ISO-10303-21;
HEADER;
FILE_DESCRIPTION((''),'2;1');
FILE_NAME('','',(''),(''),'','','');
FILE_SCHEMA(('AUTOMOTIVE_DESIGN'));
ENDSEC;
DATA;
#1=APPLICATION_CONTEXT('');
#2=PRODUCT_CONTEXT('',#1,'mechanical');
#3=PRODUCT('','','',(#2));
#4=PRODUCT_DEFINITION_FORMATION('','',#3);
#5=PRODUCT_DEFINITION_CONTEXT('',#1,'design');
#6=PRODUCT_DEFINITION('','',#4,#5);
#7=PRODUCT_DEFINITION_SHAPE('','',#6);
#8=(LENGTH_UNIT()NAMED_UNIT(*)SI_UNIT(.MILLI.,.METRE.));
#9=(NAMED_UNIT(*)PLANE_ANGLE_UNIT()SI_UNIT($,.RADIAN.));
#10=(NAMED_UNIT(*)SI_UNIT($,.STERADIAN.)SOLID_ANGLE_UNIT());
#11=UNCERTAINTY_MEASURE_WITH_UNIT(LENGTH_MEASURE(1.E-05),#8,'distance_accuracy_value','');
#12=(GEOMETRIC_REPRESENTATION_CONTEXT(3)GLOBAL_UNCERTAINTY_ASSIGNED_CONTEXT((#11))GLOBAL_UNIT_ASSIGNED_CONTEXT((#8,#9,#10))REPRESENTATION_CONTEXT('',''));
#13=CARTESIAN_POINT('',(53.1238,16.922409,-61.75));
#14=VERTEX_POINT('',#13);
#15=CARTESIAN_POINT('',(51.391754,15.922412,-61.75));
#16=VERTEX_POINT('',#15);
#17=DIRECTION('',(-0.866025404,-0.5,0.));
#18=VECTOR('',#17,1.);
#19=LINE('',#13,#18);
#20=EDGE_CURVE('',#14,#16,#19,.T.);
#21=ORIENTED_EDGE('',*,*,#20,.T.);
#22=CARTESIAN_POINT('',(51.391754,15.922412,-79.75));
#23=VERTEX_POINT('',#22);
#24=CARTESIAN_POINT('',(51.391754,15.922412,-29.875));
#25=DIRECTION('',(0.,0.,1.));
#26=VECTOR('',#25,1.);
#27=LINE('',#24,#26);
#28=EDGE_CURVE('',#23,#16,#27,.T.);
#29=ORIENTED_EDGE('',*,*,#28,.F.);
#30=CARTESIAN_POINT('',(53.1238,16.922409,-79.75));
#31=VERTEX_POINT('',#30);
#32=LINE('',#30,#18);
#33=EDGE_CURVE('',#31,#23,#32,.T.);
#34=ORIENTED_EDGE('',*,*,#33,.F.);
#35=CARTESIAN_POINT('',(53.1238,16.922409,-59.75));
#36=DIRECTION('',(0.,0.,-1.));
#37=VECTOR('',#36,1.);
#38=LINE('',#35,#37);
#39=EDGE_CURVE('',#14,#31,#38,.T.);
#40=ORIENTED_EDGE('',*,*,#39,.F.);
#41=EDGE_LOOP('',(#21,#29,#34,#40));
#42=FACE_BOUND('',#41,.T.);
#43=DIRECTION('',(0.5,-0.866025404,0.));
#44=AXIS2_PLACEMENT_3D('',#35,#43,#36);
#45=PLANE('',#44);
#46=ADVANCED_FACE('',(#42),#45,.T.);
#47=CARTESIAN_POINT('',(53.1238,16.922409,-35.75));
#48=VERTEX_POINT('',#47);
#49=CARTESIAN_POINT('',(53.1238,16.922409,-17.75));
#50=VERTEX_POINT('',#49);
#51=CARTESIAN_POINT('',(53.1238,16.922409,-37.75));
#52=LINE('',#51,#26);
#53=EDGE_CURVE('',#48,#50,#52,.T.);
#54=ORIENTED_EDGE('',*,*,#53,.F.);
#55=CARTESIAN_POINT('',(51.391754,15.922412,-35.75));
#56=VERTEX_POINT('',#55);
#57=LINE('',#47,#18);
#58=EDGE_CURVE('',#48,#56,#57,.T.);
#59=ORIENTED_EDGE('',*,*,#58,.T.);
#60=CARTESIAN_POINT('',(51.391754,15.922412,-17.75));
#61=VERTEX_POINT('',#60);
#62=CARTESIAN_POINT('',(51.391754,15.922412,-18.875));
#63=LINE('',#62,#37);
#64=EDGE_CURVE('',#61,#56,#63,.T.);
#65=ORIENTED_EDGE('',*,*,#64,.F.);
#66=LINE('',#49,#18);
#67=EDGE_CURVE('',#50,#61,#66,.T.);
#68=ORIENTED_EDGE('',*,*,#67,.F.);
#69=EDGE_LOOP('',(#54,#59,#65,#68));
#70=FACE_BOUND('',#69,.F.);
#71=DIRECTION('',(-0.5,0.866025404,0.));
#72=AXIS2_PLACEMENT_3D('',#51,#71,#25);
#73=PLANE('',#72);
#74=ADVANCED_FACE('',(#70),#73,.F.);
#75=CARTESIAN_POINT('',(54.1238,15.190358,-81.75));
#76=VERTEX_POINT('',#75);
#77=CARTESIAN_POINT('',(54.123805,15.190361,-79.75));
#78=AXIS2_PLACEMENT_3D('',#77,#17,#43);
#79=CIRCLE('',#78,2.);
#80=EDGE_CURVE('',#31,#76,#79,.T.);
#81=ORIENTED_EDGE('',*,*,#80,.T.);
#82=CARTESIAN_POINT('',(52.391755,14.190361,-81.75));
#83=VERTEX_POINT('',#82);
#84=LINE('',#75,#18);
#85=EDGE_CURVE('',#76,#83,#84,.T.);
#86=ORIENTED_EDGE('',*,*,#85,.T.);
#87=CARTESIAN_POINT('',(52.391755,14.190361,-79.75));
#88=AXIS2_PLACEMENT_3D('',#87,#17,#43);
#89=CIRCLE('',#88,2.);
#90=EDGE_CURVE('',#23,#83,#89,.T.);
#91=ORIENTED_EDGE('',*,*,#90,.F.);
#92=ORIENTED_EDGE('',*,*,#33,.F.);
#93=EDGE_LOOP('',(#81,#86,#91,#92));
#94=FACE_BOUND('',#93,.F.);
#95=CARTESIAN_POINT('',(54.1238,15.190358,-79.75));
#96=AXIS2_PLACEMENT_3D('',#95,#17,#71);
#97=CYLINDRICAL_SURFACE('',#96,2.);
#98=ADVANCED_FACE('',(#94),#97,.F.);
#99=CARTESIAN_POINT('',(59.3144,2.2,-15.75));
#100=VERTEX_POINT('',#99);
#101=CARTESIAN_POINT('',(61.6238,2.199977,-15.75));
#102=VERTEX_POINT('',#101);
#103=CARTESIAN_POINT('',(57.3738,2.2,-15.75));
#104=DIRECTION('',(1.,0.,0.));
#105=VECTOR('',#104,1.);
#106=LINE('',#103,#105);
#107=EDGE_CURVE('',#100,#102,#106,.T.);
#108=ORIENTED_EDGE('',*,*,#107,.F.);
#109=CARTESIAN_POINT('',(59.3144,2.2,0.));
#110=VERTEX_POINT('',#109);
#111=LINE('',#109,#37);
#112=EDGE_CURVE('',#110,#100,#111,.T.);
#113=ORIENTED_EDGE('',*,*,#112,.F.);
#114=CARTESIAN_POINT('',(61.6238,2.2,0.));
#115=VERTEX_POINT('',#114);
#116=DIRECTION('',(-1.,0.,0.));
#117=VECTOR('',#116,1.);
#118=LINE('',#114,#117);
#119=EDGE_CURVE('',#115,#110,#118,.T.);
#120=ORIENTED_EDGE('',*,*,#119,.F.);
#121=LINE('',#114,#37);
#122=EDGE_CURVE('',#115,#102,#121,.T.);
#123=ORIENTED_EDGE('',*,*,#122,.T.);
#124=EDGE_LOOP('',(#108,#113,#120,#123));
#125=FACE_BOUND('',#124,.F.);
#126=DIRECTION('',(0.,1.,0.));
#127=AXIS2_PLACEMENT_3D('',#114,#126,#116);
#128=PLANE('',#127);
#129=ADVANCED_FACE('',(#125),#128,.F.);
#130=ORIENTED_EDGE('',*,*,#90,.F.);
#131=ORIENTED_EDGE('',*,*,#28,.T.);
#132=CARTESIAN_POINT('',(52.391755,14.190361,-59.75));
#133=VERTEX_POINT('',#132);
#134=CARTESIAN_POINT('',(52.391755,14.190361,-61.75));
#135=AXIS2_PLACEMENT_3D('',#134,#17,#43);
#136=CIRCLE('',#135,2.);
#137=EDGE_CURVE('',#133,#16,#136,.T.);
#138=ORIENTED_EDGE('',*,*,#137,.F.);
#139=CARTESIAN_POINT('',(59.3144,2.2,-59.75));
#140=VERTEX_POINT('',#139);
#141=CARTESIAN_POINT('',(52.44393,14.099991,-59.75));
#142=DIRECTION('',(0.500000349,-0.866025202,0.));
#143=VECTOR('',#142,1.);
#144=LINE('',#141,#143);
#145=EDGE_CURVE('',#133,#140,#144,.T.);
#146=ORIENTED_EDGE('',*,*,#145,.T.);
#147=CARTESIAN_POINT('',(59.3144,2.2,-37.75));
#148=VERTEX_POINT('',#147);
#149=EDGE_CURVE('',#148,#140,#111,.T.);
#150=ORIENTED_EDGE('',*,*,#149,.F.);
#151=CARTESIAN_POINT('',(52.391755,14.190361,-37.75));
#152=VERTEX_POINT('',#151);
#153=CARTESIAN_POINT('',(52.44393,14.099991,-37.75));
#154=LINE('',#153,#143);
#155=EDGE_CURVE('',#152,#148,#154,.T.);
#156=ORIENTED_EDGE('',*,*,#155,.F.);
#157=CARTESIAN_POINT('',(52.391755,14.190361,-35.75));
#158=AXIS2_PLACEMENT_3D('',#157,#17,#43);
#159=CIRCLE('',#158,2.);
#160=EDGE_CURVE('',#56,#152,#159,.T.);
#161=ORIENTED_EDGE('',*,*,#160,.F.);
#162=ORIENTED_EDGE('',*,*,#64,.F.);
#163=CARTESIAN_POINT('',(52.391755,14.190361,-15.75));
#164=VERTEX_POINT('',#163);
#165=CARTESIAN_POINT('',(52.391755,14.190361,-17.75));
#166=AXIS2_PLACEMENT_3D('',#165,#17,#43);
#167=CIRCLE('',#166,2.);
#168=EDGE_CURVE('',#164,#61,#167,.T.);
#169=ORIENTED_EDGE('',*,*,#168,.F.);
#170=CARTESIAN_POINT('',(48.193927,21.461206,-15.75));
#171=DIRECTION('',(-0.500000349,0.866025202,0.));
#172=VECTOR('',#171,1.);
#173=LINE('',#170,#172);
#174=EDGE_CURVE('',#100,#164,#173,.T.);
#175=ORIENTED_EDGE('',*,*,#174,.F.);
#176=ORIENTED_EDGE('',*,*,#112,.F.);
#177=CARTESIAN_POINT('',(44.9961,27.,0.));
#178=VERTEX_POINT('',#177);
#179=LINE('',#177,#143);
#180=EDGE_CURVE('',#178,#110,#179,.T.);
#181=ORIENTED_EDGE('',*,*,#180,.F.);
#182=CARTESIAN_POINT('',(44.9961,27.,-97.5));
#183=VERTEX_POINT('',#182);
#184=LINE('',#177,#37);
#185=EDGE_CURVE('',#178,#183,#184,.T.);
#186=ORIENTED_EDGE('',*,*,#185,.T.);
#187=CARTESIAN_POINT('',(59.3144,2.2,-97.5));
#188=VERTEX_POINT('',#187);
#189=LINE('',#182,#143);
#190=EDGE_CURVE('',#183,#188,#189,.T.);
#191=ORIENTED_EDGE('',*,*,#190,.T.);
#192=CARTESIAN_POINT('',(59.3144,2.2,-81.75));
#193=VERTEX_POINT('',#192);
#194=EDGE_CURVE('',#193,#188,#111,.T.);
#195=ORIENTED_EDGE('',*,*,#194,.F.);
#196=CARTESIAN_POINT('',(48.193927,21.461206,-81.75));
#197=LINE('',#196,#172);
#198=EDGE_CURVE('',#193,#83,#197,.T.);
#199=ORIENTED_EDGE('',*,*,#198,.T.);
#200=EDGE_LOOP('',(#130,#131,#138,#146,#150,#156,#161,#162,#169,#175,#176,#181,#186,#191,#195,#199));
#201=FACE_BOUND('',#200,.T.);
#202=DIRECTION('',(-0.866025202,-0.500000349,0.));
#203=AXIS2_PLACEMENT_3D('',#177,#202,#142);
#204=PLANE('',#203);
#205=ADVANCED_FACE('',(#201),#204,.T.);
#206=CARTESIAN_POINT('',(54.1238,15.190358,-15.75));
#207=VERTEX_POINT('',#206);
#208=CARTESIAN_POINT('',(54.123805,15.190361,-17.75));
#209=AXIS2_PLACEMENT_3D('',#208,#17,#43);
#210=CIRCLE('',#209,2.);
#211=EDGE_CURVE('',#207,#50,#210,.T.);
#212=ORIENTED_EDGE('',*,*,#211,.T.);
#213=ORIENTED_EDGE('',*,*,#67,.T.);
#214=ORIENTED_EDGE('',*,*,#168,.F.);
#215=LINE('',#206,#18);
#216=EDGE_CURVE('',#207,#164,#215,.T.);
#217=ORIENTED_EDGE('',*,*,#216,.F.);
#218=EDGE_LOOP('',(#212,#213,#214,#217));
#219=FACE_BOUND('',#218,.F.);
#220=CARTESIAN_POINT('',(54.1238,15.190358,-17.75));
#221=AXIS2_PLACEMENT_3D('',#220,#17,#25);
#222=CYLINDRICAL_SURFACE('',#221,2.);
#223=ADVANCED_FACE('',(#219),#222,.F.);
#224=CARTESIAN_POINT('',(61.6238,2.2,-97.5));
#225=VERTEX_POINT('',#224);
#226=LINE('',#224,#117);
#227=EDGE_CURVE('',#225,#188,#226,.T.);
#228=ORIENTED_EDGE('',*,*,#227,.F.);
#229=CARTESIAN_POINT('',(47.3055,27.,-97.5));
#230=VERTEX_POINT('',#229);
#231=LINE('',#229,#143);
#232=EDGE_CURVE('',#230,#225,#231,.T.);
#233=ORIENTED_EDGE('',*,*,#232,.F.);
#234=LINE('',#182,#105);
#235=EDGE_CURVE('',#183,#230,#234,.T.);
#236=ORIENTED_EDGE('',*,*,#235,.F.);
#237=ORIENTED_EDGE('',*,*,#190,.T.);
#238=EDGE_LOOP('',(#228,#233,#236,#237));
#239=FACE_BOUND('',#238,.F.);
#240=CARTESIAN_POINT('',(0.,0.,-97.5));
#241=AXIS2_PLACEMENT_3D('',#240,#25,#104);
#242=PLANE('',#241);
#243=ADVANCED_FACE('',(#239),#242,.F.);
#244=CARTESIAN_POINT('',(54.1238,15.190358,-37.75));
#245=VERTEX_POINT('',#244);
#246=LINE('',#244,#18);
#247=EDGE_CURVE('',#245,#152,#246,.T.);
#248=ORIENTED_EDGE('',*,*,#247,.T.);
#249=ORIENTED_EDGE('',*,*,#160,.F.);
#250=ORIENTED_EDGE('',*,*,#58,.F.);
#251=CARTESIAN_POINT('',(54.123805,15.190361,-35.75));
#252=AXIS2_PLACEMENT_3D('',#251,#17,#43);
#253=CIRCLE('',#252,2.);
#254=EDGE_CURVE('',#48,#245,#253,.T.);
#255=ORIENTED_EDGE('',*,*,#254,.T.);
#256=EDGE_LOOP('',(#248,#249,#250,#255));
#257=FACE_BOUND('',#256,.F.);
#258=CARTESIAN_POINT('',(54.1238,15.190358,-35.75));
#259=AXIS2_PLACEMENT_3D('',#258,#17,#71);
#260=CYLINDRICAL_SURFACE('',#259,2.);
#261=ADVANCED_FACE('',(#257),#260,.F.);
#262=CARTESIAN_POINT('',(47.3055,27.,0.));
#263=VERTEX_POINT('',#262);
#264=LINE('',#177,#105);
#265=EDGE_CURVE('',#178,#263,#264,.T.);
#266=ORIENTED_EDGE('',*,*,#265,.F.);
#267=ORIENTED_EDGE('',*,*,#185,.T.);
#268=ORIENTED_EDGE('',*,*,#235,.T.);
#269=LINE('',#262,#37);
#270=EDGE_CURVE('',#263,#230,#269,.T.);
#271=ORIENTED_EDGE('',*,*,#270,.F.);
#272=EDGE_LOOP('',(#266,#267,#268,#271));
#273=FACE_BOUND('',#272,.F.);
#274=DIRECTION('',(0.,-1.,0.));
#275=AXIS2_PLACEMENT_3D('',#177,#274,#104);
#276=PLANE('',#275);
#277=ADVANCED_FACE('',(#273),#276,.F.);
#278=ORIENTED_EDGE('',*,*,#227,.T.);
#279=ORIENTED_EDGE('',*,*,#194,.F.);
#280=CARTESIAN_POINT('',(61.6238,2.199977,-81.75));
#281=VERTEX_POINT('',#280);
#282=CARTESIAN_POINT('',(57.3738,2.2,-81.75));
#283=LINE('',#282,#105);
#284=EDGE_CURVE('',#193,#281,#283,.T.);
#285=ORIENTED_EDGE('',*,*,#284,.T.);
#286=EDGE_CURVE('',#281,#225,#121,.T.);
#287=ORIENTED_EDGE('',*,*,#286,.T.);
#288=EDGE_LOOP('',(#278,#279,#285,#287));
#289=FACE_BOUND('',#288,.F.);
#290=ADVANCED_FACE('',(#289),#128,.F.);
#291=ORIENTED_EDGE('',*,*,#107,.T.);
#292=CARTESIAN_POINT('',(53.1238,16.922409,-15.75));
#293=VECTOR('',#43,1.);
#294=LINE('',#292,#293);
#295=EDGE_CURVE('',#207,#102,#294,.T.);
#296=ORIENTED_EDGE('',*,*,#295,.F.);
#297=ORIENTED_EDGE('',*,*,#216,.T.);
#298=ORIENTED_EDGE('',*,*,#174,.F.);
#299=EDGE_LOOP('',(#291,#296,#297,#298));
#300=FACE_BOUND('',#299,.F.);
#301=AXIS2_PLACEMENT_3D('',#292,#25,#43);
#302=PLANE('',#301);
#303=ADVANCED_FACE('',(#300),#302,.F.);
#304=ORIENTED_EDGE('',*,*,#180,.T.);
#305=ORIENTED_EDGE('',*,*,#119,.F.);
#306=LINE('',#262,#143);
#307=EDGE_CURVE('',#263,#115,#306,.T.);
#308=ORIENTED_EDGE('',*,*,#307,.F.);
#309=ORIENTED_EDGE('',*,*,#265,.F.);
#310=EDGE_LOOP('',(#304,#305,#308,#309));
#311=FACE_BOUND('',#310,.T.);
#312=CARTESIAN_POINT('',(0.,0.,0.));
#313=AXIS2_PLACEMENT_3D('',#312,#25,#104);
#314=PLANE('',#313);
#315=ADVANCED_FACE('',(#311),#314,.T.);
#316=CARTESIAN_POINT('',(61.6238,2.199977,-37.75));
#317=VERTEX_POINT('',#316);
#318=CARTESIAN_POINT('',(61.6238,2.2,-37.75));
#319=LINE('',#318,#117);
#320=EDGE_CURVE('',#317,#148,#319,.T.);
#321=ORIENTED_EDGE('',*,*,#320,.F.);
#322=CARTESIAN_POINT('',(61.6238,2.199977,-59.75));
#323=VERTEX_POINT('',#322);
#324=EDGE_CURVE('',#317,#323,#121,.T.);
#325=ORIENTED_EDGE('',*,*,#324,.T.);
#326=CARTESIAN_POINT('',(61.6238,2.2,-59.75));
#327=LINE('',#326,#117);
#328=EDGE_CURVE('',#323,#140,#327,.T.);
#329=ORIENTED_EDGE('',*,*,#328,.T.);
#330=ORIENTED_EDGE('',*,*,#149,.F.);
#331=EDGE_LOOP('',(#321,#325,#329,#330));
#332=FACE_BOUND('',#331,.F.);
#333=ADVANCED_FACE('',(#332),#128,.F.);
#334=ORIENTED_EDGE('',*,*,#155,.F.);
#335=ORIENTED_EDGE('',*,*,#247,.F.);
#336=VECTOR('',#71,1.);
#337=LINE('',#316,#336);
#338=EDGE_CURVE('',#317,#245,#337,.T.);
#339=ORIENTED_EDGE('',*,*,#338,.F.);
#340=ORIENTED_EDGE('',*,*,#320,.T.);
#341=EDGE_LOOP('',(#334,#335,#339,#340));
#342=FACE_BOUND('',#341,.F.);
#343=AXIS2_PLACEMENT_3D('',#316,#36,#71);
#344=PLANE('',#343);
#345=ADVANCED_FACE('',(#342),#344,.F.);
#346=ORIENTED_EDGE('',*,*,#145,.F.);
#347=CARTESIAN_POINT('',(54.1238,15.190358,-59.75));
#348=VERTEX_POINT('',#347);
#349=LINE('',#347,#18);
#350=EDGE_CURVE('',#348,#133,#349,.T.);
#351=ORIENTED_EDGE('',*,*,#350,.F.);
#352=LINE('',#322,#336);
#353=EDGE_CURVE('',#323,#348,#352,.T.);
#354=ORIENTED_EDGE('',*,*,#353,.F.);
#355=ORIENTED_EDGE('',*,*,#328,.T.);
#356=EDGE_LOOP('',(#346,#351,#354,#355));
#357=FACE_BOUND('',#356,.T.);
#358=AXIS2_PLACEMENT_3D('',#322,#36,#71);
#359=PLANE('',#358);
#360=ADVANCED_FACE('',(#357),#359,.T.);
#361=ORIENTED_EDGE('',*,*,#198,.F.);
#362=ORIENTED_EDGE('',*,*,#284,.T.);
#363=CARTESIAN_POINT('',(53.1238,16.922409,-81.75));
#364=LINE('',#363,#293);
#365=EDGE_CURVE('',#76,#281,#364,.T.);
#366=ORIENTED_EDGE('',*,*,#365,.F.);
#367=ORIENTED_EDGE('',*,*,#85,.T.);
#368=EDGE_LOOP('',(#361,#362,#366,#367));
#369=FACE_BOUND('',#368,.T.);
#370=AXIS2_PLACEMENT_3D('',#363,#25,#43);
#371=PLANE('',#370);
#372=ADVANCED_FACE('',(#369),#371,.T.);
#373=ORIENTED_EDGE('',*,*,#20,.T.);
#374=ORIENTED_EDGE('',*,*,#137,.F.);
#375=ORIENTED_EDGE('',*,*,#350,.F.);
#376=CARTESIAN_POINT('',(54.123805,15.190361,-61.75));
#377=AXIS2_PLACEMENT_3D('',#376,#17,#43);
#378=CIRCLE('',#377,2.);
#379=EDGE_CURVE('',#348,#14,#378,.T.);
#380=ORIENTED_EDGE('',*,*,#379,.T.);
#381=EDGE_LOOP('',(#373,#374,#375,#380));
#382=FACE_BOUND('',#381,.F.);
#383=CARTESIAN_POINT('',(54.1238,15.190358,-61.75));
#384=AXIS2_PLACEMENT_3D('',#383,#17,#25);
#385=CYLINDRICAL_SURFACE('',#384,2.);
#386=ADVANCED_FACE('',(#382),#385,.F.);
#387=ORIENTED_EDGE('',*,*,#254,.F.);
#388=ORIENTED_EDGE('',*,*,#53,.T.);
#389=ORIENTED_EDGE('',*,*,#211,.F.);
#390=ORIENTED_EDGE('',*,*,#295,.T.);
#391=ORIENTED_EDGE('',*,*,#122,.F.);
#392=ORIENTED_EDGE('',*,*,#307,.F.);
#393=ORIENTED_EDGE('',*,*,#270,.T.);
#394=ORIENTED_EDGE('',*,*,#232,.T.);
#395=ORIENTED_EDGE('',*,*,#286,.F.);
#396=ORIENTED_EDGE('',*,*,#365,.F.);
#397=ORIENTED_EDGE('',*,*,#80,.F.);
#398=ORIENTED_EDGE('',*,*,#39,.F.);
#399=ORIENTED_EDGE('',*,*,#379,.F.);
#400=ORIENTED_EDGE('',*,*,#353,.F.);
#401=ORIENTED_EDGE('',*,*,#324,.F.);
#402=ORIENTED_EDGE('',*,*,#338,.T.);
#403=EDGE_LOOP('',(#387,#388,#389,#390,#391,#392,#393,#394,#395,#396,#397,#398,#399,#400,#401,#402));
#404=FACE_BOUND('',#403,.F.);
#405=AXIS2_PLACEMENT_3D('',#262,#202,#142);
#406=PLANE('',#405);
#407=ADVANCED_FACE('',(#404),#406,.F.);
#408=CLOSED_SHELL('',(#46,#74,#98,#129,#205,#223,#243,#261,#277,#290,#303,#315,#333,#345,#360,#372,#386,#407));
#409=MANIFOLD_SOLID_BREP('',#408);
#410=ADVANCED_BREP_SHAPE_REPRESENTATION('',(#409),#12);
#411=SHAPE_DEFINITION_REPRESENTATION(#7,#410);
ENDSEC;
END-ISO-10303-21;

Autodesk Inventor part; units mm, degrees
ref_plane "YZ Plane" through (0, 0, 0) normal (1, 0, 0) x (0, 1, 0)
ref_plane "XZ Plane" through (0, 0, 0) normal (0, 1, 0) x (-1, 0, 0)
sketch "Sketch1" plane through (0, 0, 0) normal (0, 0, 1) x (1, 0, 0)
  line L0 (44.9961, 27) -> (47.3055, 27)
  line L1 (47.3055, 27) -> (61.6238, 2.2)
  line L2 (61.6238, 2.2) -> (59.3144, 2.2)
  line L3 (59.3144, 2.2) -> (44.9961, 27) construction
  line L4 (44.9961, 27) -> (59.3144, 2.2)
  line L5 (16.5, 27) -> (44.9961, 27) construction
  point P0 (0, 0)
  dimension "d10" = 2
ref_plane "Work Plane1" through (0, 0, -97.5) normal (0, 0, -1) x (0, 1, 0)
extrude "Extrusion1" add sketch "Sketch1" against normal up to surface (97.5 mm away)
sketch "Sketch2" plane through (47.3055, 27, 0) normal (0.8660254, 0.5, 0) x (0, 0, -1)
  line L0 (15.75, -28.6366) -> (37.75, -28.6366)
  line L1 (37.75, -28.6366) -> (37.75, -11.6366)
  line L2 (37.75, -11.6366) -> (15.75, -11.6366)
  line L3 (15.75, -11.6366) -> (15.75, -28.6366)
  line L4 (0, 0) -> (97.5, 0) construction
  line L5 (48.75, 0) -> (48.75, -28.6366) construction
  line L6 (0, -28.6366) -> (97.5, -28.6366) construction
  line L7 (81.75, -28.6366) -> (59.75, -28.6366)
  line L8 (59.75, -28.6366) -> (59.75, -11.6366)
  line L9 (59.75, -11.6366) -> (81.75, -11.6366)
  line L10 (81.75, -11.6366) -> (81.75, -28.6366)
  point P0 (0, 0.2701)
  dimension "d4" = 22
  dimension "d5" = 22
  dimension "d6" = 17
extrude "Extrusion2" cut sketch "Sketch2" against normal through all
fillet "Fillet1" radius 2 4 edges at (52.2577, 16.4224, -37.75) (52.2577, 16.4224, -15.75) (52.2577, 16.4224, -59.75) (52.2577, 16.4224, -81.75)
properties part number "Przod" material "Aluminum 6061"
